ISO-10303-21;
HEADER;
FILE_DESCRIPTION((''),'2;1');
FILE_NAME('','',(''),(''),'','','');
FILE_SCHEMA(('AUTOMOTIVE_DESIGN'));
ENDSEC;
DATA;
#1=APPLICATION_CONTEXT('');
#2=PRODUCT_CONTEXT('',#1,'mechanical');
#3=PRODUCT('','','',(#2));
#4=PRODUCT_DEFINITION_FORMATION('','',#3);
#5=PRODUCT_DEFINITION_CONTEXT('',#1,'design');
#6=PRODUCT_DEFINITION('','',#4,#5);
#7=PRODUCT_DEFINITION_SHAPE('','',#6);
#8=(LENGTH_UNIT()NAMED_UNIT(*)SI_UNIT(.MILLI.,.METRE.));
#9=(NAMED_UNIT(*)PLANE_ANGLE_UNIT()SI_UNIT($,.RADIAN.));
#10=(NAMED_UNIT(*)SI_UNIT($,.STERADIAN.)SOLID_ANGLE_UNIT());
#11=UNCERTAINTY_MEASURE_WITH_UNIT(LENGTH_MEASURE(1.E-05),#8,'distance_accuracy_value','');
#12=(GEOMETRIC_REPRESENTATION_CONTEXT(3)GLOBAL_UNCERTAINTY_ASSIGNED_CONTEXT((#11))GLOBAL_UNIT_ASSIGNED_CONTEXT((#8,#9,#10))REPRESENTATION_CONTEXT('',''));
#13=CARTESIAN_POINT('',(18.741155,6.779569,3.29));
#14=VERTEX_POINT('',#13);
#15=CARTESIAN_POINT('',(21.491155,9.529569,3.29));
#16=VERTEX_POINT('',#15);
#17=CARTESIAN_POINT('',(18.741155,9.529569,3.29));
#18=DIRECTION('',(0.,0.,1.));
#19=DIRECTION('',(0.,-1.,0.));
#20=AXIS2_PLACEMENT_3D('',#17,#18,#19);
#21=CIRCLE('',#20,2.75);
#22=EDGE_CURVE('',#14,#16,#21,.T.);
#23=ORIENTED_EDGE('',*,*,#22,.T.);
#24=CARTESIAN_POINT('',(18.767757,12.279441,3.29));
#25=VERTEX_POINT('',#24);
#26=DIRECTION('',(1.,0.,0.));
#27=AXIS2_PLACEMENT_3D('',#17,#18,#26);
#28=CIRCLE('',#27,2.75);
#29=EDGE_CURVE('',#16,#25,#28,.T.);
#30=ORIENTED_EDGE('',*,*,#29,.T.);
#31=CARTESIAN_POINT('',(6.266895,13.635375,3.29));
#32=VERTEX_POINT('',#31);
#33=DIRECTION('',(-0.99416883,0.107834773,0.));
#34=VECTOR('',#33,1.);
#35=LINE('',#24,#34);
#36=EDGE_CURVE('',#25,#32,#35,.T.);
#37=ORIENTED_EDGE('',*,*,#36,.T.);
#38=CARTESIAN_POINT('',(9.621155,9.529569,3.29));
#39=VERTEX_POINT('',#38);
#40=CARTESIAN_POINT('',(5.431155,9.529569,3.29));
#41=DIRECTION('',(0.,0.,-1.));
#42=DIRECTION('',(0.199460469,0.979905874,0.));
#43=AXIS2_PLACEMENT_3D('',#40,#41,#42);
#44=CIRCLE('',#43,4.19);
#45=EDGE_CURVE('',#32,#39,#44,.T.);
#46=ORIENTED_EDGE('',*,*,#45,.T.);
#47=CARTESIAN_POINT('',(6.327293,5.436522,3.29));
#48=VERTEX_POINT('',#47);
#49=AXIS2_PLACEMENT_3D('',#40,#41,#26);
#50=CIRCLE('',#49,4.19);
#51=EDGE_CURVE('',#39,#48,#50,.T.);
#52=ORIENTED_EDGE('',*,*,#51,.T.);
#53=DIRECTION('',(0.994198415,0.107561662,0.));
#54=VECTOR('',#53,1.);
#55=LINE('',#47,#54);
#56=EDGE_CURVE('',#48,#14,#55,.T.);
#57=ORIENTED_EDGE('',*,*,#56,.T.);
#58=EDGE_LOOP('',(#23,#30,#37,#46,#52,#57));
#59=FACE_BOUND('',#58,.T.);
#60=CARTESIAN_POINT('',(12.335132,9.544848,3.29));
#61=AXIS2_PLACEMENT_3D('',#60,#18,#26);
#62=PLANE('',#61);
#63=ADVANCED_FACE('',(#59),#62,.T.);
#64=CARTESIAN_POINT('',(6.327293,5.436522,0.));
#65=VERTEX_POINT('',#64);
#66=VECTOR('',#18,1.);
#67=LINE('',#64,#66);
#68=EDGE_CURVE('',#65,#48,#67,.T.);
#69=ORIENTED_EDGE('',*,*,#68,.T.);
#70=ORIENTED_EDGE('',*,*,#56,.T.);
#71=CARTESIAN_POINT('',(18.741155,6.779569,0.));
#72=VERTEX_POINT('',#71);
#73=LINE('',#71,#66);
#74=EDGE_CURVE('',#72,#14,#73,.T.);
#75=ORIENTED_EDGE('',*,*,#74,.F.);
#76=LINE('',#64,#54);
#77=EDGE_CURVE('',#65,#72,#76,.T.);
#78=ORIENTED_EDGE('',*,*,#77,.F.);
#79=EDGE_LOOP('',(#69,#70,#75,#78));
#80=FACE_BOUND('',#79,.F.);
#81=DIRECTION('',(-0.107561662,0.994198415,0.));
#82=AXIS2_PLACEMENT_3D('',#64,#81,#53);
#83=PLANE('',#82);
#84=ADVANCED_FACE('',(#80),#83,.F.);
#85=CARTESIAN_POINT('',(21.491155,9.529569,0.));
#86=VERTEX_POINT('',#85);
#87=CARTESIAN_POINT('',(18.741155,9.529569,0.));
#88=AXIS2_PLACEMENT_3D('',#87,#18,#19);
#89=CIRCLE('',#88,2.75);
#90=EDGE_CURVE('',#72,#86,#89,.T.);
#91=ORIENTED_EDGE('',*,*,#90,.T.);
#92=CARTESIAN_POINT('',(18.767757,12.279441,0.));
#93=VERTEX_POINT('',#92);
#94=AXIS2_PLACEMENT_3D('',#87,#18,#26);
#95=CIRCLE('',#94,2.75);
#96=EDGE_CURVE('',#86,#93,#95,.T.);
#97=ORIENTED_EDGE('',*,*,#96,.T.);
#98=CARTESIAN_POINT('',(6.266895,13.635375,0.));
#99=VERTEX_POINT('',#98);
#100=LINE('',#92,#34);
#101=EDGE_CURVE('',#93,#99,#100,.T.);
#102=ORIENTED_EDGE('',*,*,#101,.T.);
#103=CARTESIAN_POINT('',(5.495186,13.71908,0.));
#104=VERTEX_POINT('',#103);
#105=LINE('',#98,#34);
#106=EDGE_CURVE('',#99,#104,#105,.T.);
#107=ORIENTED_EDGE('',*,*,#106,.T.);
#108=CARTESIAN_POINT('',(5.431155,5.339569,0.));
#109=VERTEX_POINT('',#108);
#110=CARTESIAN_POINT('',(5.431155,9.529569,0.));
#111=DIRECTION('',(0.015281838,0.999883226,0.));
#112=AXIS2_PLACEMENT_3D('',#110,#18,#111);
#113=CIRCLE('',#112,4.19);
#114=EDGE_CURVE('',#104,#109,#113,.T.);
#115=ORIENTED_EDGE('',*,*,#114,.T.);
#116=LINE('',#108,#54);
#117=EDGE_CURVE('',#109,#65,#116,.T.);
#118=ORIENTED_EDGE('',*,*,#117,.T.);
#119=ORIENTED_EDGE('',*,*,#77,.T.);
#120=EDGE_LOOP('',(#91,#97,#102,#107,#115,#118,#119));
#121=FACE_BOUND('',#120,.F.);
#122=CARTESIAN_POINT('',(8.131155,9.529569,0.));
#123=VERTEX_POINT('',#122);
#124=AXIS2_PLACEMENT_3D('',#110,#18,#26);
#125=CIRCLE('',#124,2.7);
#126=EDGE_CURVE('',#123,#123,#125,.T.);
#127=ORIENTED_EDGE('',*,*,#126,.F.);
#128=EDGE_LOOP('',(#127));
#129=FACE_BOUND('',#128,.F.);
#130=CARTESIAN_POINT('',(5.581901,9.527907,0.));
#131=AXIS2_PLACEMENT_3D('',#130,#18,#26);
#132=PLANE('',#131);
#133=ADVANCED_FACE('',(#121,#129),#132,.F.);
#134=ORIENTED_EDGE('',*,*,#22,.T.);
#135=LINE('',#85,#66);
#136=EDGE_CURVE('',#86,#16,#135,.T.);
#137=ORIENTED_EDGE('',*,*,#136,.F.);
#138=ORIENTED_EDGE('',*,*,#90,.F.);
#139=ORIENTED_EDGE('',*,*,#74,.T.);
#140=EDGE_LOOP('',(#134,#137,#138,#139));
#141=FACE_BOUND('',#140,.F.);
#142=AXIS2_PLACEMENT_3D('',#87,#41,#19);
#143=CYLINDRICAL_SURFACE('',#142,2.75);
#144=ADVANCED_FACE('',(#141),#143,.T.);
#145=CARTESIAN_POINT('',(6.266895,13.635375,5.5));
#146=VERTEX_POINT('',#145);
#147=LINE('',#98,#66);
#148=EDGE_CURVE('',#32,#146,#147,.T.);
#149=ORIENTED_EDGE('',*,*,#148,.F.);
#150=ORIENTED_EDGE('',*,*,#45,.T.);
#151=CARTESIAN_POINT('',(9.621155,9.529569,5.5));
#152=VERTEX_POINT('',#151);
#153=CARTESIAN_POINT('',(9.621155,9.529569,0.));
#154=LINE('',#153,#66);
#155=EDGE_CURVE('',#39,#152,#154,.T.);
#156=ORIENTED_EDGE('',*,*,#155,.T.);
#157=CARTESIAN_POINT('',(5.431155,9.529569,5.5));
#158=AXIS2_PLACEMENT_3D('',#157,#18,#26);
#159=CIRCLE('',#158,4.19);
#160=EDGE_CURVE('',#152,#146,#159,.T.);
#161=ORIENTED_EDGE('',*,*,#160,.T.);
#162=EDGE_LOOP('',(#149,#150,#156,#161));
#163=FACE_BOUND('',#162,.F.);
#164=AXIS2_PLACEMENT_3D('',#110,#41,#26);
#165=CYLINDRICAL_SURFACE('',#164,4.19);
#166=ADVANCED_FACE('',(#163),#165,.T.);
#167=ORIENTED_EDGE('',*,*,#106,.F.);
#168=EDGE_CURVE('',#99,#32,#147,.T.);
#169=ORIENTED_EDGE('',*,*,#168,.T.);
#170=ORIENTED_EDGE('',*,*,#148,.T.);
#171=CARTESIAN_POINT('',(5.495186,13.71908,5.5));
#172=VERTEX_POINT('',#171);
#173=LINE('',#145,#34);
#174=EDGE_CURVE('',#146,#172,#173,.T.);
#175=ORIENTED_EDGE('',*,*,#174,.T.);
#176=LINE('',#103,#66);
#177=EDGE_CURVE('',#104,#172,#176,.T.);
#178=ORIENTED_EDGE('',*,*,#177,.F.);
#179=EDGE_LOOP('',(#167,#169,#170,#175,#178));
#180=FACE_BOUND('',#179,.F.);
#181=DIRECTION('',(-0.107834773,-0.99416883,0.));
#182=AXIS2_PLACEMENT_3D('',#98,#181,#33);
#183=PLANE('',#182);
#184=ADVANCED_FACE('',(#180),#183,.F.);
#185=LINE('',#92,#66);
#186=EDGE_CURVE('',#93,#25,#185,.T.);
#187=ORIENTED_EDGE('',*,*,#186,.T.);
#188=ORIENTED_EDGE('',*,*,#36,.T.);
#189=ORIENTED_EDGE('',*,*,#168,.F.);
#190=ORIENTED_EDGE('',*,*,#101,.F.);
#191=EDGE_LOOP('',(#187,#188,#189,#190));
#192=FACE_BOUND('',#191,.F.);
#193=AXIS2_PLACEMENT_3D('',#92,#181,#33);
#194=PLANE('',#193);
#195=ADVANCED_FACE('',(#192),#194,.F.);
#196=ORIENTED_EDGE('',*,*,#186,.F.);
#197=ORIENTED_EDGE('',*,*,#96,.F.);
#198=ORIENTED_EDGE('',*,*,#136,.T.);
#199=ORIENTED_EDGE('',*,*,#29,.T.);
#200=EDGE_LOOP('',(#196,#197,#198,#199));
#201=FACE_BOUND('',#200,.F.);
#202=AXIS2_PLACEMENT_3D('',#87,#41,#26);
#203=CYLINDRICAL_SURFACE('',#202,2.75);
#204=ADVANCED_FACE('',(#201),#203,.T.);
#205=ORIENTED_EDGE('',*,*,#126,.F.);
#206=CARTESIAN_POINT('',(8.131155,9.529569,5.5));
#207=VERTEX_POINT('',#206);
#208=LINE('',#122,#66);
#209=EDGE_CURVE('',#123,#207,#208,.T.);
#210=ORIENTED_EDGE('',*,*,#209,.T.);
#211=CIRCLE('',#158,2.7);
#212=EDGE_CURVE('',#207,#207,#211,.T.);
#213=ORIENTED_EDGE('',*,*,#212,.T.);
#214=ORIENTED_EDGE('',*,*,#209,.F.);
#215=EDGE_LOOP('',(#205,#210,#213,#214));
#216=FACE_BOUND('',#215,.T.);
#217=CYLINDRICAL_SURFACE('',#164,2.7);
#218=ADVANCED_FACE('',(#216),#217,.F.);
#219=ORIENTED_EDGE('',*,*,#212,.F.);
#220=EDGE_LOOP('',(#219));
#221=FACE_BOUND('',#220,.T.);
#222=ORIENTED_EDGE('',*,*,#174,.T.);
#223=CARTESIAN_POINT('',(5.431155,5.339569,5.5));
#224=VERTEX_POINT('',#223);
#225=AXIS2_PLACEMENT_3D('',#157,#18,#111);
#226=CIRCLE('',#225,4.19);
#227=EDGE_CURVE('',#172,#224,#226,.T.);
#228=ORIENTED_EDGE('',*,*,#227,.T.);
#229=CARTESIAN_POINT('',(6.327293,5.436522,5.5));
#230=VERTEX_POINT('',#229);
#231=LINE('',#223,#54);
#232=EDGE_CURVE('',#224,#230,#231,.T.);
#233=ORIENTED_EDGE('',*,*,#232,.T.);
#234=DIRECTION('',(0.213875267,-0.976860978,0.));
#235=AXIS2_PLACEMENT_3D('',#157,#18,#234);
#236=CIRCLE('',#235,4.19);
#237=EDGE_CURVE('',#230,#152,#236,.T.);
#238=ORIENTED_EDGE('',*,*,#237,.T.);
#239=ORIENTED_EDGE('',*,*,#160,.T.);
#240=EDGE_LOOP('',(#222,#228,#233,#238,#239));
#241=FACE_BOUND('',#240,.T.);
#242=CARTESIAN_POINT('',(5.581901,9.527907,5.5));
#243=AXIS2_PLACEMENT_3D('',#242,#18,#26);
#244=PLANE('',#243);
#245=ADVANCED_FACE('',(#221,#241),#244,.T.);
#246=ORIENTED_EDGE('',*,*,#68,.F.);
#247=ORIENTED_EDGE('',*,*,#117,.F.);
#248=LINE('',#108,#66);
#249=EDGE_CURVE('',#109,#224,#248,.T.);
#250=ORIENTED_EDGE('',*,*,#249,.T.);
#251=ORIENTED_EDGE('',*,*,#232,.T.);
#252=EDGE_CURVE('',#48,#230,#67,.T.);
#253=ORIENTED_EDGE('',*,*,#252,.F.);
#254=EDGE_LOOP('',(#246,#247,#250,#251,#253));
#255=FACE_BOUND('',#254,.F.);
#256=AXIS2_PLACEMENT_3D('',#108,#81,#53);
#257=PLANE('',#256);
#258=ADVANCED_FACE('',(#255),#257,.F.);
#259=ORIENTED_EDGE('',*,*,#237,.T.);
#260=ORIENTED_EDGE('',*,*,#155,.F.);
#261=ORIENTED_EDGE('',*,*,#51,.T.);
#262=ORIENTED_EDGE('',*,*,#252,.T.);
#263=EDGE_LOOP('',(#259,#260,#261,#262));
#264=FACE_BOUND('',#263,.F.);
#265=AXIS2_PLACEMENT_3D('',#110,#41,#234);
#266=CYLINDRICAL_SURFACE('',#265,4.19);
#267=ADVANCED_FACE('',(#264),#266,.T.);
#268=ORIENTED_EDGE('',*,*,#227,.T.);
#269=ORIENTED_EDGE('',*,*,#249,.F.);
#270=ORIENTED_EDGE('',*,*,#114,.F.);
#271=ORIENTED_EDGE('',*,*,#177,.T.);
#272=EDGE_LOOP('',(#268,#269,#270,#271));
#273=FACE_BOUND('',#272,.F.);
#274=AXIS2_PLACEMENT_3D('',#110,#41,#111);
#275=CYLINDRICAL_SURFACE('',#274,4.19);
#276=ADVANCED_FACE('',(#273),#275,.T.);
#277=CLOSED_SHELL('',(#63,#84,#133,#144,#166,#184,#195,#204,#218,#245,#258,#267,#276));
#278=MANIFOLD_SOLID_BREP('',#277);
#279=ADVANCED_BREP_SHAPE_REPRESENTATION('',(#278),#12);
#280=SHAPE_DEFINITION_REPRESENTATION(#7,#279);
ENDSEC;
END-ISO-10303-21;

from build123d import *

# Parameters (mm, degrees)
F1_DEPTH = 3.29
F0_R     = 2.7
F2_DEPTH = 5.5


with BuildPart() as f1:
    # F0 (on Top) → F1 (new body)
    with BuildSketch(Plane.XY):
        with BuildLine():
            Line((18.7677565455, 12.2794405385), (6.2668947811, 13.6353748107))
            ThreePointArc((6.2668947811, 13.6353748107), (8.675985762, 12.1804513231), (9.621155417, 9.5295691997))
            ThreePointArc((9.621155417, 9.5295691997), (8.6954252879, 6.9026618527), (6.3272927871, 5.4365217026))
            Line((6.3272927871, 5.4365217026), (18.741155417, 6.7795691997))
            ThreePointArc((18.741155417, 6.7795691997), (15.9911875825, 9.5428699196), (18.7677565455, 12.2794405385))
        make_face()
        with BuildLine():
            ThreePointArc((21.491155417, 9.5295691997), (20.69508135, 11.4646850744), (18.7677565455, 12.2794405385))
            ThreePointArc((18.7677565455, 12.2794405385), (15.9911875825, 9.5428699196), (18.741155417, 6.7795691997))
            ThreePointArc((18.741155417, 6.7795691997), (20.6856990652, 7.5850255515), (21.491155417, 9.5295691997))
        make_face()
    extrude(amount=F1_DEPTH)

    # F0 (on Top) → F2 (join)
    with BuildSketch(Plane.XY):
        with BuildLine():
            Line((6.2668947811, 13.6353748107), (5.4951863181, 13.7190799162))
            ThreePointArc((5.4951863181, 13.7190799162), (1.2412777396, 9.561585585), (5.431155417, 5.3395691997))
            Line((5.431155417, 5.3395691997), (6.3272927871, 5.4365217026))
            ThreePointArc((6.3272927871, 5.4365217026), (8.6954252879, 6.9026618527), (9.621155417, 9.5295691997))
            ThreePointArc((9.621155417, 9.5295691997), (8.675985762, 12.1804513231), (6.2668947811, 13.6353748107))
        make_face()
        with Locations((5.431155417, 9.5295691997)):
            Circle(F0_R, mode=Mode.SUBTRACT)
    extrude(amount=F2_DEPTH)


solid = f1.part
